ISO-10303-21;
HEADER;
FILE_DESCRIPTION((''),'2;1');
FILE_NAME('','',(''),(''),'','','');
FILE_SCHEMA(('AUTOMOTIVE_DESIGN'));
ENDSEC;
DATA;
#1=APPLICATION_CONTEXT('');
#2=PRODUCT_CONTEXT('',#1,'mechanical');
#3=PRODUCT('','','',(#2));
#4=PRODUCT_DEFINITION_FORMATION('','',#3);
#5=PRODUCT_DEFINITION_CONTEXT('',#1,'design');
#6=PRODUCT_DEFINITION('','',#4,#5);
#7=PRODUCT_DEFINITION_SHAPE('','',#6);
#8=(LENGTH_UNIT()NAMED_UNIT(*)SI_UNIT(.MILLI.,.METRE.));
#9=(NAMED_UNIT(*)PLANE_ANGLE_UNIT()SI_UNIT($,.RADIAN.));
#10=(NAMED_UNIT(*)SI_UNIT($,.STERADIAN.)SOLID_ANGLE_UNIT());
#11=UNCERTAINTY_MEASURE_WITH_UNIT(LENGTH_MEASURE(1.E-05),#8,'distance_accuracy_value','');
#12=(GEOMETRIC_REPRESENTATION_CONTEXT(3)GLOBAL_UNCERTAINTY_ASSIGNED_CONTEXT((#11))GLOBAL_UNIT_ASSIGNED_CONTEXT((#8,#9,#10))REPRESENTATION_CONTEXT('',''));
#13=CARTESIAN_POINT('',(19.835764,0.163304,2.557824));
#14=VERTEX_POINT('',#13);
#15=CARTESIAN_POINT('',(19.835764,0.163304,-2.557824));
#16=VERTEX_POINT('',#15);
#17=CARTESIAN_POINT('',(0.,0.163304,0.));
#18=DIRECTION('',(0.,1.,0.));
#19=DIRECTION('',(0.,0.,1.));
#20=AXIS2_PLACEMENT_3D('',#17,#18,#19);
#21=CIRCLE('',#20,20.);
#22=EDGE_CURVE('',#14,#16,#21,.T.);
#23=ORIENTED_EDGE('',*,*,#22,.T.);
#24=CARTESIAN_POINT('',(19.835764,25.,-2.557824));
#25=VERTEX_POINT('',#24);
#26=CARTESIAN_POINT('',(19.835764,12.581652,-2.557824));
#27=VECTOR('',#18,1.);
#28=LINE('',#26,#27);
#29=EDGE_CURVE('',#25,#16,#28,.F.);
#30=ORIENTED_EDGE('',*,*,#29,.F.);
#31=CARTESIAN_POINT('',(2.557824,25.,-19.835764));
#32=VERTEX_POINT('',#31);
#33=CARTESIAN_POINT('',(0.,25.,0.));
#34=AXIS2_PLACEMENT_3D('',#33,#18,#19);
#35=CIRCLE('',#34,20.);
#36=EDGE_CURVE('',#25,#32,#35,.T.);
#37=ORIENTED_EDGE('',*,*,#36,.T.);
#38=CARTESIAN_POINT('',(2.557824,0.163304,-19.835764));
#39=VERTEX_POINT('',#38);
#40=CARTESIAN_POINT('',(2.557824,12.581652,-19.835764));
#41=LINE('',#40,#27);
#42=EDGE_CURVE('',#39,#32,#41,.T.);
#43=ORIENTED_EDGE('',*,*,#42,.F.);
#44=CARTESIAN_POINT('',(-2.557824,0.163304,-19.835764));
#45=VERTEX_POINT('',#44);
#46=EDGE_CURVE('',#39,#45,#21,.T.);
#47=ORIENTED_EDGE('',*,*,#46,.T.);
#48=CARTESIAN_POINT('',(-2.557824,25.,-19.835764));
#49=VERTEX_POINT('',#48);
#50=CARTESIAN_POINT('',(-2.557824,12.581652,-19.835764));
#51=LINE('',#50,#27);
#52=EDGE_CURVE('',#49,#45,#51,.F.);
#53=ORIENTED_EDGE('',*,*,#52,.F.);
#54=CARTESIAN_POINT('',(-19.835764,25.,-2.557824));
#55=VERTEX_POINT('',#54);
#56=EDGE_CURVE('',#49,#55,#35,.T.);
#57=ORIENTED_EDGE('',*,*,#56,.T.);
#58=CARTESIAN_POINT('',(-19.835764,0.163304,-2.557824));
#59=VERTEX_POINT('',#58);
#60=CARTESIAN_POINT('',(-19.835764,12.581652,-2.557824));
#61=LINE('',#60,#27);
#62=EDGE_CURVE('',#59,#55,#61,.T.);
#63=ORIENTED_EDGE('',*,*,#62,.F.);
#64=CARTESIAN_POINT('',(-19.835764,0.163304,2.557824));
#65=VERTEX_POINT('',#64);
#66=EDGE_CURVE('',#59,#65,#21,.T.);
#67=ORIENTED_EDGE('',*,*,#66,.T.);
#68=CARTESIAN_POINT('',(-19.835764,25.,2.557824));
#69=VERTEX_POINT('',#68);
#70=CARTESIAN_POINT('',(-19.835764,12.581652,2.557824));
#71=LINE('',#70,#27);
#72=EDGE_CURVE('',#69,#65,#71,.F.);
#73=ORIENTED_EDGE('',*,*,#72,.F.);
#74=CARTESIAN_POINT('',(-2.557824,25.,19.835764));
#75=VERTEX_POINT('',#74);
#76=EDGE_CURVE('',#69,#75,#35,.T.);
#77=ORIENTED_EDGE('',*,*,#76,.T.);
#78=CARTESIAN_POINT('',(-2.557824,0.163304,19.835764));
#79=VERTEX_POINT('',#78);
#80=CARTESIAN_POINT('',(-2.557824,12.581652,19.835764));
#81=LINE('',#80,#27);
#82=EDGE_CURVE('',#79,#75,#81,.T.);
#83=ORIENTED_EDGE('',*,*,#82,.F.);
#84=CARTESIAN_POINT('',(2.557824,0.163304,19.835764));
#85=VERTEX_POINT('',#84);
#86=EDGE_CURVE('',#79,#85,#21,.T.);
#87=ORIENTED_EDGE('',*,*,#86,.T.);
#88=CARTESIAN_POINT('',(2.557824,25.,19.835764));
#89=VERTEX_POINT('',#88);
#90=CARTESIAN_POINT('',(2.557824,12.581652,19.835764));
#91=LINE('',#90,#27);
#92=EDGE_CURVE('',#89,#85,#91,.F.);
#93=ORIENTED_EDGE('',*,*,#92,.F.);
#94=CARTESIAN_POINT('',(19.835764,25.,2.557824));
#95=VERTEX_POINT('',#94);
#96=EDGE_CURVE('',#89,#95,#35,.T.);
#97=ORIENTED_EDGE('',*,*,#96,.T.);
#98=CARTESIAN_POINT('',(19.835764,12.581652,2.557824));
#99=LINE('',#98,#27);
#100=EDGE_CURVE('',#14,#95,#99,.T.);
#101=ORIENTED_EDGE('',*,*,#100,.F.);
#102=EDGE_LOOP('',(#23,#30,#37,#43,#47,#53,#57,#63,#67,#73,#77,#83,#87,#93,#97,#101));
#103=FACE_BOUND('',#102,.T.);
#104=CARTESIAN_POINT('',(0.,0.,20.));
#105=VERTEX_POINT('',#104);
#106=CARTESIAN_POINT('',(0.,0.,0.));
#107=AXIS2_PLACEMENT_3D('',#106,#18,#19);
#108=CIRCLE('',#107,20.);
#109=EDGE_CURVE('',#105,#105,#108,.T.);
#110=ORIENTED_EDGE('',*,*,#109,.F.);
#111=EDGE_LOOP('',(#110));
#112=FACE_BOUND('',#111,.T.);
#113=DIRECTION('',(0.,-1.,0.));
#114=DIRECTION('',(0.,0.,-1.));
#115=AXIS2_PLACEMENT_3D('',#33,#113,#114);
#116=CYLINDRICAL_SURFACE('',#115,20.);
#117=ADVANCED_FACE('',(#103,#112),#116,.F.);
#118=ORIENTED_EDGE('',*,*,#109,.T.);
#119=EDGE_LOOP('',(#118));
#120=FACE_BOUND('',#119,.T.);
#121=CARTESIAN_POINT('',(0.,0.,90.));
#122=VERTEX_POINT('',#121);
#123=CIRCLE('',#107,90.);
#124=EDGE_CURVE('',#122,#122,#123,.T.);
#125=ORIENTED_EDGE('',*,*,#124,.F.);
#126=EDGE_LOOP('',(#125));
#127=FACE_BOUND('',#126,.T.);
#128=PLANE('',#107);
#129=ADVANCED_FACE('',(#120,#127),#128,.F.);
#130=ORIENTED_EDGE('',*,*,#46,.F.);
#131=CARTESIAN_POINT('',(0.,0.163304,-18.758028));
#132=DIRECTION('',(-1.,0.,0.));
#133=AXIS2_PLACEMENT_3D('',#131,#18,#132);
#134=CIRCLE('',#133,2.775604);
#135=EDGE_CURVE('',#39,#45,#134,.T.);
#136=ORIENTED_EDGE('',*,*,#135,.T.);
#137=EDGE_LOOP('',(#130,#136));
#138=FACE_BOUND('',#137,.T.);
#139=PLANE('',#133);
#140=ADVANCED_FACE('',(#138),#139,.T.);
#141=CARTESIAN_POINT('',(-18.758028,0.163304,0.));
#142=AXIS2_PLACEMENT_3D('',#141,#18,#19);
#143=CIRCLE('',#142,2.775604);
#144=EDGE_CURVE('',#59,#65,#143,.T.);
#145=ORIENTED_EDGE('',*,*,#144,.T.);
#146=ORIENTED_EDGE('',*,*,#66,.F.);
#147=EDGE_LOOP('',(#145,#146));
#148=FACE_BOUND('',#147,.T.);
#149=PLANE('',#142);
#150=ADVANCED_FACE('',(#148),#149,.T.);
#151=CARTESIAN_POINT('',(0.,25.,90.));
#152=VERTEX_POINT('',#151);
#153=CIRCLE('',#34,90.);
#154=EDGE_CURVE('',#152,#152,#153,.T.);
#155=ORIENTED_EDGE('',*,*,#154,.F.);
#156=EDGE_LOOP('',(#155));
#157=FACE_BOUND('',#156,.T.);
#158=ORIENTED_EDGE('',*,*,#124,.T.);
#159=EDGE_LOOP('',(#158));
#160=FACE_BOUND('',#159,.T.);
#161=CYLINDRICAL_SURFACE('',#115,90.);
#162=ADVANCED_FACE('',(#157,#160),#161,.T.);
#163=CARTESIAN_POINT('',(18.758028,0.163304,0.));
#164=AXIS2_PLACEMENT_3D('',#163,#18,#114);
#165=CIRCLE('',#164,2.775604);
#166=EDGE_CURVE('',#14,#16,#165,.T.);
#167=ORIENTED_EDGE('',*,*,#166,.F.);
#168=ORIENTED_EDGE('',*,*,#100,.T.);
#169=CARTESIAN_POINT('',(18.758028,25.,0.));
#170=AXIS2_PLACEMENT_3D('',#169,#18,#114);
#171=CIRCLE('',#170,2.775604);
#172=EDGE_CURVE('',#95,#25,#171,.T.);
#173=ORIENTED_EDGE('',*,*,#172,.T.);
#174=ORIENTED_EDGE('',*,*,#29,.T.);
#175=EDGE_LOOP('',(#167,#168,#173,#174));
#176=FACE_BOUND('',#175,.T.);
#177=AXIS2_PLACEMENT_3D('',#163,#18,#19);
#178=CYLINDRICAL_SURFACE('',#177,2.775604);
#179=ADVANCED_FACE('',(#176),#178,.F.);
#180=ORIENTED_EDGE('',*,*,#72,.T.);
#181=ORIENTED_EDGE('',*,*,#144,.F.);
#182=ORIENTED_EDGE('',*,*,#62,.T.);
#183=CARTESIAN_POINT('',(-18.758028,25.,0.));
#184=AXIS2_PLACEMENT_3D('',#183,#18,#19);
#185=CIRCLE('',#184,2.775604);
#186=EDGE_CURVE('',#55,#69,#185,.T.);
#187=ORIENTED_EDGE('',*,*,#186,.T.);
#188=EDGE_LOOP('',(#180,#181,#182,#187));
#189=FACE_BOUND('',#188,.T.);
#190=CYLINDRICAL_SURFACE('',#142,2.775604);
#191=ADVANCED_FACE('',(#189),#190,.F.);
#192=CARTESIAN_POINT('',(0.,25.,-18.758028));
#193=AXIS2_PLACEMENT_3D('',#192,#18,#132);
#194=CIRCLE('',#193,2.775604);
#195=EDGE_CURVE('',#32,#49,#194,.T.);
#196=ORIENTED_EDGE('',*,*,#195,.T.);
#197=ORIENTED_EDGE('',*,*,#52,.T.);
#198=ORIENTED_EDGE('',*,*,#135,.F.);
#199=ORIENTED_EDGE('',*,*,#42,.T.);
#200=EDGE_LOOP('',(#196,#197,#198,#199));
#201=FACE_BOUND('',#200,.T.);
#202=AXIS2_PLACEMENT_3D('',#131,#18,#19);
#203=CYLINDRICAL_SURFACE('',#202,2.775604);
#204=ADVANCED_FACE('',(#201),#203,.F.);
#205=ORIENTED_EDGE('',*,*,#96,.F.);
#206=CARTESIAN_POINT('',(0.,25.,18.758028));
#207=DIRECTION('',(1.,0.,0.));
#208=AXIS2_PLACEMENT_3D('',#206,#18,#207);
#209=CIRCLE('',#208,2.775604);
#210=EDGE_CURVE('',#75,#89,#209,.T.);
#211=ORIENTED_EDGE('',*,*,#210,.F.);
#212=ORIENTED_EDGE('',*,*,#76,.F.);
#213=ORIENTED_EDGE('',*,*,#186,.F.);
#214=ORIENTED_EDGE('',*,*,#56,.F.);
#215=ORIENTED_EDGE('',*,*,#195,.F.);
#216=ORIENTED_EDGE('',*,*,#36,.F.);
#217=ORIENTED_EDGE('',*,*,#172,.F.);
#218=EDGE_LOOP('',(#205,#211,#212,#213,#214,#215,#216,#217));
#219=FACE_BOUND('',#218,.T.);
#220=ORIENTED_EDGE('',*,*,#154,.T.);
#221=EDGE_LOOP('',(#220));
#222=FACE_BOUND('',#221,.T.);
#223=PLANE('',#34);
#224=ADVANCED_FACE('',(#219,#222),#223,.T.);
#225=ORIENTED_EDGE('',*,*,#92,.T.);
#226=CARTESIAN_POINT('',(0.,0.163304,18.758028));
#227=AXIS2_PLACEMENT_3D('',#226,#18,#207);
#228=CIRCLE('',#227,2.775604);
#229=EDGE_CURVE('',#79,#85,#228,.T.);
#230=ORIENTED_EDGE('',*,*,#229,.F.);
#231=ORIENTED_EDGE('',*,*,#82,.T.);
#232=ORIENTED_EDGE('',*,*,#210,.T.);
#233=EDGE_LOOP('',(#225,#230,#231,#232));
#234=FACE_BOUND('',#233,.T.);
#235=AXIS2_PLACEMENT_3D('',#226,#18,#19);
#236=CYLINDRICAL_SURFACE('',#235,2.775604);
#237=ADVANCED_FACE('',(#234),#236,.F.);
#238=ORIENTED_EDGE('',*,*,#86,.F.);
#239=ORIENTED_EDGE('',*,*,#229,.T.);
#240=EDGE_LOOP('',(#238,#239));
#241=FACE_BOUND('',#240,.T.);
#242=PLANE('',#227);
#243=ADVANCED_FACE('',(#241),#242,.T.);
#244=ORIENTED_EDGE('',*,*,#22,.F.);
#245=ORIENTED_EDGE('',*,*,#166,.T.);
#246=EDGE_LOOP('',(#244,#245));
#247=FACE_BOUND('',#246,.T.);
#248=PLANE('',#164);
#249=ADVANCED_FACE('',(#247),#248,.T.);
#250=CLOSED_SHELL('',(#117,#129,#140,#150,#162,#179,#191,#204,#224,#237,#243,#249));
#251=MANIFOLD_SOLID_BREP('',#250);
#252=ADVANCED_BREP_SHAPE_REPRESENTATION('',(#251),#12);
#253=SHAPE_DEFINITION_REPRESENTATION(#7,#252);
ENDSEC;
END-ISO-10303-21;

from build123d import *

# Parameters (mm, degrees)
SKETCH1_R           = 90
BOSS_EXTRUDE1_DEPTH = 25
SKETCH2_R           = 20
CUT_EXTRUDE1_DEPTH  = 130.711217711
SKETCH3_R           = 2.775603902
CUT_EXTRUDE2_DEPTH  = 24.836696363
CIRPATTERN1_COUNT   = 4


with BuildPart() as part:
    # Sketch1 → Boss-Extrude1 (new body)
    with BuildSketch(Plane(origin=(0, 0, 0), x_dir=(1, 0, 0), z_dir=(0, 1, 0))):
        Circle(SKETCH1_R)
    extrude(amount=BOSS_EXTRUDE1_DEPTH)

    # Sketch2 → Cut-Extrude1 (cut, through all)
    with BuildSketch(Plane(origin=(0, 0, 0), x_dir=(1, 0, 0), z_dir=(0, 1, 0))):
        Circle(SKETCH2_R)
    extrude(amount=CUT_EXTRUDE1_DEPTH, mode=Mode.SUBTRACT)

    # Sketch3 → Cut-Extrude2 (cut)
    with BuildSketch(Plane(origin=(0, 25, 0), x_dir=(1, 0, 0), z_dir=(0, 1, 0))):
        with Locations((-18.758028178, 0)):
            Circle(SKETCH3_R)
    cut_extrude2 = extrude(amount=-CUT_EXTRUDE2_DEPTH, mode=Mode.SUBTRACT)

    # CirPattern1: Cut-Extrude2 ×4 about axis
    cirpattern1_axis = Axis((0, 0, 0), (0, 1, 0))
    for i in range(1, CIRPATTERN1_COUNT):
        add(cut_extrude2.rotate(cirpattern1_axis, i * 360 / CIRPATTERN1_COUNT), mode=Mode.SUBTRACT)


solid = part.part
